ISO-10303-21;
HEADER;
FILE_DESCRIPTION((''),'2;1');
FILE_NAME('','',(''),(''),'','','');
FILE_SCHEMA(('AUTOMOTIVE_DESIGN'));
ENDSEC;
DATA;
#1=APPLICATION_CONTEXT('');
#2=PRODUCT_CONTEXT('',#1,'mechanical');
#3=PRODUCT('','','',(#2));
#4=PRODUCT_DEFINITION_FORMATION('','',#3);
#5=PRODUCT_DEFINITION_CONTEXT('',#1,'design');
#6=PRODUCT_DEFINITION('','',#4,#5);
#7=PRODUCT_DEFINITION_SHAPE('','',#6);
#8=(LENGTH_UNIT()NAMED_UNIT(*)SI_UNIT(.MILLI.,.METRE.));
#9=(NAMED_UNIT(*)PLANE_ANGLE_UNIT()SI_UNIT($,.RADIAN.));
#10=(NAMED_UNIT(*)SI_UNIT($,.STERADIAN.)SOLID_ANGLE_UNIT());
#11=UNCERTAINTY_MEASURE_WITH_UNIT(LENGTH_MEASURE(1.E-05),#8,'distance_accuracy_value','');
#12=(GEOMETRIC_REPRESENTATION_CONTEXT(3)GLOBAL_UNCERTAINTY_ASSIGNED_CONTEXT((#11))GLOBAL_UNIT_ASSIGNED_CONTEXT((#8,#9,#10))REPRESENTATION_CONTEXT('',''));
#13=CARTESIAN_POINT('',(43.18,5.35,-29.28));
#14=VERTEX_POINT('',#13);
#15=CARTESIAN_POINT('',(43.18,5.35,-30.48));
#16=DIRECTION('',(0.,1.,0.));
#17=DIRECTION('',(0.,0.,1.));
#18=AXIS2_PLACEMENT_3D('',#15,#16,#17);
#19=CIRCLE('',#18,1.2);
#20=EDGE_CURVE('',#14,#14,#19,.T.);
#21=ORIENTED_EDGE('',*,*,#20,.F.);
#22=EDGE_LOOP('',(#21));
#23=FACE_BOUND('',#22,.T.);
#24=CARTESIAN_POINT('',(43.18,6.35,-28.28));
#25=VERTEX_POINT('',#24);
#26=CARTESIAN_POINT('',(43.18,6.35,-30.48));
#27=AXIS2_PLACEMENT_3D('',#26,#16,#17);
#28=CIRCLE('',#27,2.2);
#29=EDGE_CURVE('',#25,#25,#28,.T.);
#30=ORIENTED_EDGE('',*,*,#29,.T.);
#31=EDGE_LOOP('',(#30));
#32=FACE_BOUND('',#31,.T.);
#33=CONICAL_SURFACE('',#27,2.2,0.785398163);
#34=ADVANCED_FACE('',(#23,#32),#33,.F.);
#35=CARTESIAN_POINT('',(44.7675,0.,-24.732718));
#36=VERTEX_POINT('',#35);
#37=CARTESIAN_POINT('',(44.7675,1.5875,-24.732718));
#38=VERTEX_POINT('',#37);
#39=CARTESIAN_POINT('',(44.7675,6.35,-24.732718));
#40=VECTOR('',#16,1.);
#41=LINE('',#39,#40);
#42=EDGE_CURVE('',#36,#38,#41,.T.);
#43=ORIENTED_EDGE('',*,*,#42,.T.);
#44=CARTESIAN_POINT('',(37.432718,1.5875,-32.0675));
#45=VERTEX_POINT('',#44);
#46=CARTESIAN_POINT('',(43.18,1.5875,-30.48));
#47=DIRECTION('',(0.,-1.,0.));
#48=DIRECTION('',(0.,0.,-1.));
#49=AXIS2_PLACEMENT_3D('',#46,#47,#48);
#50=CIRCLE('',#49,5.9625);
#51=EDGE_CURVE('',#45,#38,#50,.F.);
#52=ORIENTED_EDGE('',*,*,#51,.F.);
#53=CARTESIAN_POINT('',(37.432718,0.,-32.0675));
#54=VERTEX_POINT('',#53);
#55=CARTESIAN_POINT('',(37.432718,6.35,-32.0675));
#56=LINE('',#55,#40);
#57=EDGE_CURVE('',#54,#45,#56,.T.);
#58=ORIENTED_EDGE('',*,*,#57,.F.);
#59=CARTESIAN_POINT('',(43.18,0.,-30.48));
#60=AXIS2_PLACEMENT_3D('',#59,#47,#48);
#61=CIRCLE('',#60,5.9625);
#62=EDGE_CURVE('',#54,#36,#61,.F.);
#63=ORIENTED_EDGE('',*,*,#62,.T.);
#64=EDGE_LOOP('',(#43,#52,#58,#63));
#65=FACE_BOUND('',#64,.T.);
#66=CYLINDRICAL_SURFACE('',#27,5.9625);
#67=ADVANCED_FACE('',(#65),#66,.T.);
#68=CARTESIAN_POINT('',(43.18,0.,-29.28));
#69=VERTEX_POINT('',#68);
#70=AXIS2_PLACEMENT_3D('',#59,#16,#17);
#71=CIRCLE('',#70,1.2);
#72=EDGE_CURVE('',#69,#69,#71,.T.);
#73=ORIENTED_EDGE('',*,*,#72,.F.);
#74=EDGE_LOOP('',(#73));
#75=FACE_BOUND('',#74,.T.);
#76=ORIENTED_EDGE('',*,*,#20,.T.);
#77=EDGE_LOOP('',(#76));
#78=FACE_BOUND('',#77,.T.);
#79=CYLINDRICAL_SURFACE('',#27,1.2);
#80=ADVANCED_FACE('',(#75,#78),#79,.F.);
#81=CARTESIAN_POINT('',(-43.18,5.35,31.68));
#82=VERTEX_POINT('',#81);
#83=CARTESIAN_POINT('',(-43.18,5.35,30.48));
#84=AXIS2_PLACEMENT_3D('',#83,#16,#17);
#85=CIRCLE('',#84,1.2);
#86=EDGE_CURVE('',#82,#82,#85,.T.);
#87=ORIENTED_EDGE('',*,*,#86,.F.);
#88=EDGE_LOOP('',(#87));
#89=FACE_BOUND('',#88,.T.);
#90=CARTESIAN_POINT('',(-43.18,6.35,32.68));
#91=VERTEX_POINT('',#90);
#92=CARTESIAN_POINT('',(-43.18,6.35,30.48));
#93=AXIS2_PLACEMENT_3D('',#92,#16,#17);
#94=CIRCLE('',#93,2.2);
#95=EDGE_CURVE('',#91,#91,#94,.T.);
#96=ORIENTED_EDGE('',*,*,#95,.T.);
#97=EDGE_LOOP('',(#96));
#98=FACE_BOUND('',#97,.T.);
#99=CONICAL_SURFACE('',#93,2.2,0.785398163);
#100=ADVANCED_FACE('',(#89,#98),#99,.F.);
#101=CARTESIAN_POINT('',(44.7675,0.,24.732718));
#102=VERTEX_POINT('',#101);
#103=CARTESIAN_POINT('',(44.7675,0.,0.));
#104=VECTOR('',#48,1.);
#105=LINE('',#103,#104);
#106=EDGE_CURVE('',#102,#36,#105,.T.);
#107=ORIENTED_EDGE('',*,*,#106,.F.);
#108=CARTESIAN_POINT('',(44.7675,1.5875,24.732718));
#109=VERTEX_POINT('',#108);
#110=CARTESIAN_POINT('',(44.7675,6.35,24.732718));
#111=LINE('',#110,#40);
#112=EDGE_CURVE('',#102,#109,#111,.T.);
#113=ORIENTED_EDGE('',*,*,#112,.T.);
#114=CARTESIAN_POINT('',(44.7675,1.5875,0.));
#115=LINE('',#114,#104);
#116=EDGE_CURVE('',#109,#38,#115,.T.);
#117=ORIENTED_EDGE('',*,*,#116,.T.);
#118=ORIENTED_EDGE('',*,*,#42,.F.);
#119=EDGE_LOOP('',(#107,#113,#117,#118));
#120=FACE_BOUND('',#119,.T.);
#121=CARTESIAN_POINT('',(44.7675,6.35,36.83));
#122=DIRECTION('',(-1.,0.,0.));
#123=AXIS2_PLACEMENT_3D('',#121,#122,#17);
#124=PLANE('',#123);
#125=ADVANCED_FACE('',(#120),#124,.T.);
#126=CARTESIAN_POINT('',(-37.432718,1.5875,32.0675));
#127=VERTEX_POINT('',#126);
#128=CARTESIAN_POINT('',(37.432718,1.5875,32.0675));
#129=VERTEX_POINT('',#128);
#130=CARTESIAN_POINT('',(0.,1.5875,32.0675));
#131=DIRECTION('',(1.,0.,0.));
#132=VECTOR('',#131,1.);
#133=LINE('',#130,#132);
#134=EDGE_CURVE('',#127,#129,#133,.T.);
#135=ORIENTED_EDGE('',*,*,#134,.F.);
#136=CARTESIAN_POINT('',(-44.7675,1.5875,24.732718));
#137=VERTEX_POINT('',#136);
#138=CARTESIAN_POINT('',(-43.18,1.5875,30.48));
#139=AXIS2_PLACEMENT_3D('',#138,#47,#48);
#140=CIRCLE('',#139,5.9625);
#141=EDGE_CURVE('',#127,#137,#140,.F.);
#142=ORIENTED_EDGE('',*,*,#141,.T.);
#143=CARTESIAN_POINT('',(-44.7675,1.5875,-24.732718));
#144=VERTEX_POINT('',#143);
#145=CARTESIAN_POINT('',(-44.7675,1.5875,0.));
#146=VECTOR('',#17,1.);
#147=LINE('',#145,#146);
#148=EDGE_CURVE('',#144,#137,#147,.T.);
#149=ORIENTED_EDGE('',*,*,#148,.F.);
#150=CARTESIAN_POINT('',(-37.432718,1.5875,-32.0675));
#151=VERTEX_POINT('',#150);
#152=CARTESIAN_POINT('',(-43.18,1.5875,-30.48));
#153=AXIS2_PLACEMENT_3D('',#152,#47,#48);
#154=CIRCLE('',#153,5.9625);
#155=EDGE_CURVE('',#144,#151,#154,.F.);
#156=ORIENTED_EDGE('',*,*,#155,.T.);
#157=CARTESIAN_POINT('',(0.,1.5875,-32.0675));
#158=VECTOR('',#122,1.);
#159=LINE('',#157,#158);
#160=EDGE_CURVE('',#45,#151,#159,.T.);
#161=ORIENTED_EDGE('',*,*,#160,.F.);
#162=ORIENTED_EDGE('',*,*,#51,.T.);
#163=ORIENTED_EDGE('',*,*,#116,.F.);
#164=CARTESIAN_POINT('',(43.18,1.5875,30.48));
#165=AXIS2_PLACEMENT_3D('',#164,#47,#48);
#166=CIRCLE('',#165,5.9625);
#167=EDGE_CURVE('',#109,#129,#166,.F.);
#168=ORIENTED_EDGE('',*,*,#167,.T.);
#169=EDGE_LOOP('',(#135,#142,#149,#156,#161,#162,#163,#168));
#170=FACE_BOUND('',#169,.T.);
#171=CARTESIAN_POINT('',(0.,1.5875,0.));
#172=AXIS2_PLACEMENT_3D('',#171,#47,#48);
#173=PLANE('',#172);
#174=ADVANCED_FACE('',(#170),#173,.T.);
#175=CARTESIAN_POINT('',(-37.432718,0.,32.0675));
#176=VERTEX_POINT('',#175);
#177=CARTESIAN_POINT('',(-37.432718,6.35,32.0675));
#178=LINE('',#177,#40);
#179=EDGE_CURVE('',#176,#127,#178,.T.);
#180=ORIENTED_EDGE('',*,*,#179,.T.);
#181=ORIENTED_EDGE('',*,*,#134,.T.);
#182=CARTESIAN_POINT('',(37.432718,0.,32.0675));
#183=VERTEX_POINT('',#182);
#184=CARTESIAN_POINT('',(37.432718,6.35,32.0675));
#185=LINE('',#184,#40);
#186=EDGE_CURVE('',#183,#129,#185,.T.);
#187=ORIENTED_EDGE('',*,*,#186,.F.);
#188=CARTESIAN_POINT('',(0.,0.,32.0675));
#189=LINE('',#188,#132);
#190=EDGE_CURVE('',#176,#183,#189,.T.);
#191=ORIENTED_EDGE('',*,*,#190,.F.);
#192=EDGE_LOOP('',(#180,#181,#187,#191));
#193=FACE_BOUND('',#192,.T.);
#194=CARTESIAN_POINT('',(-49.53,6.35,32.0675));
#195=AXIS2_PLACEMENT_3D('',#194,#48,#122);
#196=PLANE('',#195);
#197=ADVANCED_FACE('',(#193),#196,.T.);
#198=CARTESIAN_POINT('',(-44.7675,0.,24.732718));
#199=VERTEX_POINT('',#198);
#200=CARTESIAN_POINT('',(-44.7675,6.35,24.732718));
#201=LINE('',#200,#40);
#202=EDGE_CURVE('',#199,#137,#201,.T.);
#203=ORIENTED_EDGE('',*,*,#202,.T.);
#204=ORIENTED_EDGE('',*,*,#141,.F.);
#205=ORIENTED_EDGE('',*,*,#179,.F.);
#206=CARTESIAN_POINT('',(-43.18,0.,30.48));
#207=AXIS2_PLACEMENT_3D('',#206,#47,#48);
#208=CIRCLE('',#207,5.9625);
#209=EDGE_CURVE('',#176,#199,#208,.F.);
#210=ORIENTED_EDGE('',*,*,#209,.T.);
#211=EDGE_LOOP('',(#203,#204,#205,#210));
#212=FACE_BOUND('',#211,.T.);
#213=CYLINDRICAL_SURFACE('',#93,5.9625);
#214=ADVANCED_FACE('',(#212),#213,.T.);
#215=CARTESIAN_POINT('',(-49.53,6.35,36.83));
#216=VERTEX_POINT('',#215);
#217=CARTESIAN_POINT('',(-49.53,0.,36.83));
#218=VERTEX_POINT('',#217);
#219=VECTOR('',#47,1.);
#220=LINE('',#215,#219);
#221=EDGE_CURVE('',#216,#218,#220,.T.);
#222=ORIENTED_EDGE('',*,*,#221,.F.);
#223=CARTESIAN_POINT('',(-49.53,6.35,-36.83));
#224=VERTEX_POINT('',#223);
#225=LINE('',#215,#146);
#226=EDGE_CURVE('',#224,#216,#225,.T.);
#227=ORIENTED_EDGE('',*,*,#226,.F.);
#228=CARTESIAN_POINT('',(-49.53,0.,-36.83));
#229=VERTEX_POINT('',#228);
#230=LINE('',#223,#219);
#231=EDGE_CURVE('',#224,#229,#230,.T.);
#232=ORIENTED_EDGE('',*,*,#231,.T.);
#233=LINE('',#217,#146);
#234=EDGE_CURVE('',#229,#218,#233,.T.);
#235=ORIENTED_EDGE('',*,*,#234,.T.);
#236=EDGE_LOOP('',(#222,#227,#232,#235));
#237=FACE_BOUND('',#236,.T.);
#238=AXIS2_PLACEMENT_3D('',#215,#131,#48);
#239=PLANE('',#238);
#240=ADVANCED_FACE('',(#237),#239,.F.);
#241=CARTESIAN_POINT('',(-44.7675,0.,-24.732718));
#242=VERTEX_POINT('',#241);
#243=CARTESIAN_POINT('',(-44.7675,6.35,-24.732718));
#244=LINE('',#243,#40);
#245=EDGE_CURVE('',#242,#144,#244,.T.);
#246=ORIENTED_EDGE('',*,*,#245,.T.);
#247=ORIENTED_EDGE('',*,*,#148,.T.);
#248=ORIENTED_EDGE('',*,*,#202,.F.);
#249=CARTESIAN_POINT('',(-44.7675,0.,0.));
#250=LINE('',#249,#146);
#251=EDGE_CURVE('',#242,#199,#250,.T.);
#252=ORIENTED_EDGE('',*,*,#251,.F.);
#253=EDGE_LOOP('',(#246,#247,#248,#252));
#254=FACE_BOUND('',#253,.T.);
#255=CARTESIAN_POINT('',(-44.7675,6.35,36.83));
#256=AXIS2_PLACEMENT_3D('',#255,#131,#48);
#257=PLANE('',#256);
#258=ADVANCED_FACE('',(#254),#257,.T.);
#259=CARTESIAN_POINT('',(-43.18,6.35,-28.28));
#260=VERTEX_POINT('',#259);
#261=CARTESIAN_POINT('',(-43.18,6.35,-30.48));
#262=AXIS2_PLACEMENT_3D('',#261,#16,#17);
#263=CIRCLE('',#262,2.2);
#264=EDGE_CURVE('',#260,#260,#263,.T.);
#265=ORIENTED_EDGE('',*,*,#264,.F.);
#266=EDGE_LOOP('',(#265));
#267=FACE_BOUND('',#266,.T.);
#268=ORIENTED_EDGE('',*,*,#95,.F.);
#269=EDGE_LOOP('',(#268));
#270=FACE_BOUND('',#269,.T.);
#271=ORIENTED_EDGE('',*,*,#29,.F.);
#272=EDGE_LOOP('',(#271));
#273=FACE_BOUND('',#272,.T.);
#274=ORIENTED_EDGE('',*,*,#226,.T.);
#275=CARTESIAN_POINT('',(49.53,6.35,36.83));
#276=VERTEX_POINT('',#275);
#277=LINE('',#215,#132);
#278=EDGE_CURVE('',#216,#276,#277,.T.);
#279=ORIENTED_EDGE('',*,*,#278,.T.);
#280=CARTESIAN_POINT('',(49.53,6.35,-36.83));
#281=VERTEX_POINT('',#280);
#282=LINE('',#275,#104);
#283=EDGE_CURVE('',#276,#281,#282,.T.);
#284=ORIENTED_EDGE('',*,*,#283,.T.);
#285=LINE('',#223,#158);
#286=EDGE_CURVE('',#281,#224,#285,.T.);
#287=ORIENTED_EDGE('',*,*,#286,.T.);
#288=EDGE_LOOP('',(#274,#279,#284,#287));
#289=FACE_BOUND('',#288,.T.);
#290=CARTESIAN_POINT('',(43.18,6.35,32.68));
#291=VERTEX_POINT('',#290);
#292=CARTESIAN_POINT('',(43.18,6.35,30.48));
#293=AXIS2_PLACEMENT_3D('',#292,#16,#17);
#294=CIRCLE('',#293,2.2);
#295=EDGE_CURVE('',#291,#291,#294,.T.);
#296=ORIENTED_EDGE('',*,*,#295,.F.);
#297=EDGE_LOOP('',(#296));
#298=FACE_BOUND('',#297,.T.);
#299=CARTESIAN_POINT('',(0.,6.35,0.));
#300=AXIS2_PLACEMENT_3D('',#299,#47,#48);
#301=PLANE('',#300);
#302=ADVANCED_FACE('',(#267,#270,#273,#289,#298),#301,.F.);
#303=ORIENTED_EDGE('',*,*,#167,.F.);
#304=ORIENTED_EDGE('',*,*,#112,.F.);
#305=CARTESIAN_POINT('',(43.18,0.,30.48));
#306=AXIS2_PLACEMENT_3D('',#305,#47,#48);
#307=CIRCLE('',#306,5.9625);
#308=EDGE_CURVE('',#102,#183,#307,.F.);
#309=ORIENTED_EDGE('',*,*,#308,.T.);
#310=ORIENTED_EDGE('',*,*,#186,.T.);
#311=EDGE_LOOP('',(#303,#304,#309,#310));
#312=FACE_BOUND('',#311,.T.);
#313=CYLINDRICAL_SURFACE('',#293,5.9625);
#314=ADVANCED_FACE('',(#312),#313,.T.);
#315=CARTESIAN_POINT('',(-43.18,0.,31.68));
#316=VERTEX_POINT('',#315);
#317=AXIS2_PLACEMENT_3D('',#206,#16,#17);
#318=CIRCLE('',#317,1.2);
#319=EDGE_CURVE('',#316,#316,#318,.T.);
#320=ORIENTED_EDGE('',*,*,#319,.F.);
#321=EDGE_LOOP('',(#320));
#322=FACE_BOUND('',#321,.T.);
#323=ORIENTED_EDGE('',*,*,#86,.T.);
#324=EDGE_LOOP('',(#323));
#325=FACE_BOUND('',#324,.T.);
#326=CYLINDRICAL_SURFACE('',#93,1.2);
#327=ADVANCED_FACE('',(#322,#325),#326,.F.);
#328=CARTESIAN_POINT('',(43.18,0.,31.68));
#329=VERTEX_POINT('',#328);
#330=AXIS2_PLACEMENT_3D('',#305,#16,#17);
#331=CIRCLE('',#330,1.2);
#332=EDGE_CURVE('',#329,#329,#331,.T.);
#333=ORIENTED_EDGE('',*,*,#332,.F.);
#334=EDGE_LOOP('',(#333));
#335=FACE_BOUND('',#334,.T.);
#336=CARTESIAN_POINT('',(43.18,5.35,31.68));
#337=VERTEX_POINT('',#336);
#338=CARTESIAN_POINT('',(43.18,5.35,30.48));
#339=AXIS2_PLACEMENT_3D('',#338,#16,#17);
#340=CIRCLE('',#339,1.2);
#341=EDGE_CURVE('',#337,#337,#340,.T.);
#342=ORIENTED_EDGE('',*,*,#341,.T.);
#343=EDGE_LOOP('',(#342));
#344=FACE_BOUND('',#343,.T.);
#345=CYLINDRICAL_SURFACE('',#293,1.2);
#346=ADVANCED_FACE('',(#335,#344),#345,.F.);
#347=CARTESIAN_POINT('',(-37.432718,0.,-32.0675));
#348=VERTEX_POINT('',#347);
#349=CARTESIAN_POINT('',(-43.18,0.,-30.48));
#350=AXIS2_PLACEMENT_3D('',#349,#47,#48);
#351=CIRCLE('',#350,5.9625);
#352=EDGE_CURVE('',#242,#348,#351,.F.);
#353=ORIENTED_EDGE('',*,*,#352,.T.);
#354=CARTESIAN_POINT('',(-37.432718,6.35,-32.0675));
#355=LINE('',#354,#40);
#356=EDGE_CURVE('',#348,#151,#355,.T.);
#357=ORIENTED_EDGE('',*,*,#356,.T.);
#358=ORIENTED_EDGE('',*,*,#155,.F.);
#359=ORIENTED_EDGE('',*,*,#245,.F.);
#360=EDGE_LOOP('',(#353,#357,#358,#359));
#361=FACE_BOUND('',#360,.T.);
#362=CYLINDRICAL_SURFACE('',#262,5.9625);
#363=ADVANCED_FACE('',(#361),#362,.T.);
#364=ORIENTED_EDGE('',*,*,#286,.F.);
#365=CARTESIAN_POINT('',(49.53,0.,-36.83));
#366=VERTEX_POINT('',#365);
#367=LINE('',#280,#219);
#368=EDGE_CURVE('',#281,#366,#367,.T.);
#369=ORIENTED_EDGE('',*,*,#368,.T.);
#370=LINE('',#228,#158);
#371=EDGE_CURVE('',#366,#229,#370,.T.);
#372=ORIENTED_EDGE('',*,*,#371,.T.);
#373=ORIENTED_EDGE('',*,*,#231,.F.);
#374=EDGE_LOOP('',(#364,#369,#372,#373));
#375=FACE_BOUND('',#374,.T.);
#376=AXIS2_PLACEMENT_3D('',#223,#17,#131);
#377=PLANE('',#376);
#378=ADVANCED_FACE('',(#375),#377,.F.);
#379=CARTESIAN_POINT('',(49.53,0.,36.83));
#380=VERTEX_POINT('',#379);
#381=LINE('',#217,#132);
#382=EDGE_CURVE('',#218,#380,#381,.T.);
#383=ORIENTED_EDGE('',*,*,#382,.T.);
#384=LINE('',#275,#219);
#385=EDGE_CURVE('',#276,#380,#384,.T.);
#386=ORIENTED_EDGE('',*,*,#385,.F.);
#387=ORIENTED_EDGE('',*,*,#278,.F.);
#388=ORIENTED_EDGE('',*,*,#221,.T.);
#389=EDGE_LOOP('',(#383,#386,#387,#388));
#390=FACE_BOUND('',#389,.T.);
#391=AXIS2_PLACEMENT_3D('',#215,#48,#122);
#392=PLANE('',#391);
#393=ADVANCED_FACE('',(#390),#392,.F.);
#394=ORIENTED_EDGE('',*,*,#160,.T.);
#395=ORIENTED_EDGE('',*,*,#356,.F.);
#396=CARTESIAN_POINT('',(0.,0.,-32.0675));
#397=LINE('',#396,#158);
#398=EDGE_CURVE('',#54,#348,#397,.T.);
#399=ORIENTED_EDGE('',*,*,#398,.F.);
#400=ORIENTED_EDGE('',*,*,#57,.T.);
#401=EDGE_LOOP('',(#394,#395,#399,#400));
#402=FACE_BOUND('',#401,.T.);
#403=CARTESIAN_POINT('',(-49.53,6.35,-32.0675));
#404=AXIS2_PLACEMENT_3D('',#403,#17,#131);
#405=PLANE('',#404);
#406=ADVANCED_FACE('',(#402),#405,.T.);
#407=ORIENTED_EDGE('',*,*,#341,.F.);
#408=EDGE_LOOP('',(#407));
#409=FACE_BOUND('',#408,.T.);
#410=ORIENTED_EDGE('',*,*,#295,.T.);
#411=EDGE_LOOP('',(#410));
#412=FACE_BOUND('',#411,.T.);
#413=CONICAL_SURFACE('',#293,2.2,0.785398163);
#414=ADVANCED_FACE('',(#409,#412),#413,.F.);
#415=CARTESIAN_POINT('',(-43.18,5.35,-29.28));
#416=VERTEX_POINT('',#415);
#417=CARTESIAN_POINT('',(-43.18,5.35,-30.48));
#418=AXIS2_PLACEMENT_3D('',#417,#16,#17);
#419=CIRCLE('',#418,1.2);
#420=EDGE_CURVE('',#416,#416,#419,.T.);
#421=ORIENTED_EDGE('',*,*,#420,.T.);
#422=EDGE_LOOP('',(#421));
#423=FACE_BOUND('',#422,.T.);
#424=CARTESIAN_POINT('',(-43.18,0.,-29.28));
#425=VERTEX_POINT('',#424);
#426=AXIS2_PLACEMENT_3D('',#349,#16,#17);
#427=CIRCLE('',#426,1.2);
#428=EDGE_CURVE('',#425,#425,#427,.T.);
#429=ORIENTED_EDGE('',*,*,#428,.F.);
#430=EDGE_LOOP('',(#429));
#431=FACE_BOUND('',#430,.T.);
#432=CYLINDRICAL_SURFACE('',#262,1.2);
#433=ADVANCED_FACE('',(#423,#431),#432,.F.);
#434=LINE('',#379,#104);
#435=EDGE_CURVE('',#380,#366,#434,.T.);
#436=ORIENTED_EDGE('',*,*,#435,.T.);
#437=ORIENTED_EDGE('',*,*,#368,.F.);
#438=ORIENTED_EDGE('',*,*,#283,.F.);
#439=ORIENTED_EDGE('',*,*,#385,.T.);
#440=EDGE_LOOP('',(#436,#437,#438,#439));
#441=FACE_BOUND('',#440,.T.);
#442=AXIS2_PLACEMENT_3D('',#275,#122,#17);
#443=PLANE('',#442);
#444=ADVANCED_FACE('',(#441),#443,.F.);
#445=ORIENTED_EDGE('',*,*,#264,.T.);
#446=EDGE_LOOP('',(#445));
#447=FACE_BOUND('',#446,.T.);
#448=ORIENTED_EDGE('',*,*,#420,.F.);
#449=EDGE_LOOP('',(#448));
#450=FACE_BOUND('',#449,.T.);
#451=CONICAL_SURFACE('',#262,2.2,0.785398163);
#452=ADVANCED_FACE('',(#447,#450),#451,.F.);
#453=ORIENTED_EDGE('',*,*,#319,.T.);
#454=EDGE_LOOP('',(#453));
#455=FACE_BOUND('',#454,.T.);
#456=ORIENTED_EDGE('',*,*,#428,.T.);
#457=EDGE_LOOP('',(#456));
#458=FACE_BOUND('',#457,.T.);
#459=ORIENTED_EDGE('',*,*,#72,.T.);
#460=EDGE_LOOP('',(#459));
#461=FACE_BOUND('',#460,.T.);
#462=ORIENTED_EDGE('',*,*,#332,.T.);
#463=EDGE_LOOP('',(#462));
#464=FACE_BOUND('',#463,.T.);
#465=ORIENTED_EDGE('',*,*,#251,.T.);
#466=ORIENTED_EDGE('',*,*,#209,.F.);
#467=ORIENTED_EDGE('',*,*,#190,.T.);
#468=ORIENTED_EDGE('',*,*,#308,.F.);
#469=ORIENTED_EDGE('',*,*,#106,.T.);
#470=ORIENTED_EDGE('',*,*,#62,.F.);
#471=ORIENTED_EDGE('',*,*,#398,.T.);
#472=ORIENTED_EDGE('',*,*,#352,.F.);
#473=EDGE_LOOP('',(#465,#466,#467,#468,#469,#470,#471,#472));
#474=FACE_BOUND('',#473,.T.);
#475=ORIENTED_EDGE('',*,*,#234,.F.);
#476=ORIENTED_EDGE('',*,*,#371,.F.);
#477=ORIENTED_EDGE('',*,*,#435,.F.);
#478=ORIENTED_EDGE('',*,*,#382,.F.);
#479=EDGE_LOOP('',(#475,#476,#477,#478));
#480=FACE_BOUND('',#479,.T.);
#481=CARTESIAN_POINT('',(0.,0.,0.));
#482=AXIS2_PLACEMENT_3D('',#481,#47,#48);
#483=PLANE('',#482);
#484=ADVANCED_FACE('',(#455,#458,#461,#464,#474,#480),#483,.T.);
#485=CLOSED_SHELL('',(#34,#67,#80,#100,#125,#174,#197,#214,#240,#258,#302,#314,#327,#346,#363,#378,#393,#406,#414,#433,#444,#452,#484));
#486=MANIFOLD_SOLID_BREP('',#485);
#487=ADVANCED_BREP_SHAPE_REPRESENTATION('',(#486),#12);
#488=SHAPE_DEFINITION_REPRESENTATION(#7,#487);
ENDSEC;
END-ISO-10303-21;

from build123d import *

# Parameters (mm, degrees)
SKETCH1_W                                       = 99.06
SKETCH1_H                                       = 73.66
BOSS_EXTRUDE1_DEPTH                             = 6.35
CSK_FOR_M2_FLAT_HEAD_MACHINE_SCREW1_D           = 2.4
CSK_FOR_M2_FLAT_HEAD_MACHINE_SCREW1_CSINK_D     = 4.4
CSK_FOR_M2_FLAT_HEAD_MACHINE_SCREW1_CSINK_ANGLE = 90
SHELL1_DEPTH                                    = 1.5875


# Read off the part's stored shape, not the designer's step: Shell1
with BuildPart() as part:
    # Sketch1 → Boss-Extrude1 (new body)
    with BuildSketch(Plane(origin=(0, 0, 0), x_dir=(1, 0, 0), z_dir=(0, 1, 0))):
        Rectangle(SKETCH1_W, SKETCH1_H)
    extrude(amount=BOSS_EXTRUDE1_DEPTH)

    # CSK for M2 Flat Head Machine Screw1 (through all)
    with Locations(Plane(origin=(0, 6.35, 0), x_dir=(1, 0, 0), z_dir=(0, 1, 0))):
        with Locations((-43.18, 30.48), (-43.18, -30.48), (43.18, -30.48), (43.18, 30.48)):
            CounterSinkHole(CSK_FOR_M2_FLAT_HEAD_MACHINE_SCREW1_D / 2, CSK_FOR_M2_FLAT_HEAD_MACHINE_SCREW1_CSINK_D / 2, counter_sink_angle=CSK_FOR_M2_FLAT_HEAD_MACHINE_SCREW1_CSINK_ANGLE)

    # Shell1 outline → Shell1 (cut)
    with BuildSketch(Plane(origin=(0, 0, 0), x_dir=(1, 0, 0), z_dir=(0, 1, 0))):
        with BuildLine():
            Line((44.7675, -24.732718034), (44.7675, 24.732718034))
            ThreePointArc((44.7675, 24.732718034), (38.963875817, 26.263875817), (37.432718034, 32.0675))
            Line((37.432718034, 32.0675), (-37.432718034, 32.0675))
            ThreePointArc((-37.432718034, 32.0675), (-38.963875817, 26.263875817), (-44.7675, 24.732718034))
            Line((-44.7675, 24.732718034), (-44.7675, -24.732718034))
            ThreePointArc((-44.7675, -24.732718034), (-38.963875817, -26.263875817), (-37.432718034, -32.0675))
            Line((-37.432718034, -32.0675), (37.432718034, -32.0675))
            ThreePointArc((37.432718034, -32.0675), (38.963875817, -26.263875817), (44.7675, -24.732718034))
        make_face()
    extrude(amount=SHELL1_DEPTH, mode=Mode.SUBTRACT)


solid = part.part
